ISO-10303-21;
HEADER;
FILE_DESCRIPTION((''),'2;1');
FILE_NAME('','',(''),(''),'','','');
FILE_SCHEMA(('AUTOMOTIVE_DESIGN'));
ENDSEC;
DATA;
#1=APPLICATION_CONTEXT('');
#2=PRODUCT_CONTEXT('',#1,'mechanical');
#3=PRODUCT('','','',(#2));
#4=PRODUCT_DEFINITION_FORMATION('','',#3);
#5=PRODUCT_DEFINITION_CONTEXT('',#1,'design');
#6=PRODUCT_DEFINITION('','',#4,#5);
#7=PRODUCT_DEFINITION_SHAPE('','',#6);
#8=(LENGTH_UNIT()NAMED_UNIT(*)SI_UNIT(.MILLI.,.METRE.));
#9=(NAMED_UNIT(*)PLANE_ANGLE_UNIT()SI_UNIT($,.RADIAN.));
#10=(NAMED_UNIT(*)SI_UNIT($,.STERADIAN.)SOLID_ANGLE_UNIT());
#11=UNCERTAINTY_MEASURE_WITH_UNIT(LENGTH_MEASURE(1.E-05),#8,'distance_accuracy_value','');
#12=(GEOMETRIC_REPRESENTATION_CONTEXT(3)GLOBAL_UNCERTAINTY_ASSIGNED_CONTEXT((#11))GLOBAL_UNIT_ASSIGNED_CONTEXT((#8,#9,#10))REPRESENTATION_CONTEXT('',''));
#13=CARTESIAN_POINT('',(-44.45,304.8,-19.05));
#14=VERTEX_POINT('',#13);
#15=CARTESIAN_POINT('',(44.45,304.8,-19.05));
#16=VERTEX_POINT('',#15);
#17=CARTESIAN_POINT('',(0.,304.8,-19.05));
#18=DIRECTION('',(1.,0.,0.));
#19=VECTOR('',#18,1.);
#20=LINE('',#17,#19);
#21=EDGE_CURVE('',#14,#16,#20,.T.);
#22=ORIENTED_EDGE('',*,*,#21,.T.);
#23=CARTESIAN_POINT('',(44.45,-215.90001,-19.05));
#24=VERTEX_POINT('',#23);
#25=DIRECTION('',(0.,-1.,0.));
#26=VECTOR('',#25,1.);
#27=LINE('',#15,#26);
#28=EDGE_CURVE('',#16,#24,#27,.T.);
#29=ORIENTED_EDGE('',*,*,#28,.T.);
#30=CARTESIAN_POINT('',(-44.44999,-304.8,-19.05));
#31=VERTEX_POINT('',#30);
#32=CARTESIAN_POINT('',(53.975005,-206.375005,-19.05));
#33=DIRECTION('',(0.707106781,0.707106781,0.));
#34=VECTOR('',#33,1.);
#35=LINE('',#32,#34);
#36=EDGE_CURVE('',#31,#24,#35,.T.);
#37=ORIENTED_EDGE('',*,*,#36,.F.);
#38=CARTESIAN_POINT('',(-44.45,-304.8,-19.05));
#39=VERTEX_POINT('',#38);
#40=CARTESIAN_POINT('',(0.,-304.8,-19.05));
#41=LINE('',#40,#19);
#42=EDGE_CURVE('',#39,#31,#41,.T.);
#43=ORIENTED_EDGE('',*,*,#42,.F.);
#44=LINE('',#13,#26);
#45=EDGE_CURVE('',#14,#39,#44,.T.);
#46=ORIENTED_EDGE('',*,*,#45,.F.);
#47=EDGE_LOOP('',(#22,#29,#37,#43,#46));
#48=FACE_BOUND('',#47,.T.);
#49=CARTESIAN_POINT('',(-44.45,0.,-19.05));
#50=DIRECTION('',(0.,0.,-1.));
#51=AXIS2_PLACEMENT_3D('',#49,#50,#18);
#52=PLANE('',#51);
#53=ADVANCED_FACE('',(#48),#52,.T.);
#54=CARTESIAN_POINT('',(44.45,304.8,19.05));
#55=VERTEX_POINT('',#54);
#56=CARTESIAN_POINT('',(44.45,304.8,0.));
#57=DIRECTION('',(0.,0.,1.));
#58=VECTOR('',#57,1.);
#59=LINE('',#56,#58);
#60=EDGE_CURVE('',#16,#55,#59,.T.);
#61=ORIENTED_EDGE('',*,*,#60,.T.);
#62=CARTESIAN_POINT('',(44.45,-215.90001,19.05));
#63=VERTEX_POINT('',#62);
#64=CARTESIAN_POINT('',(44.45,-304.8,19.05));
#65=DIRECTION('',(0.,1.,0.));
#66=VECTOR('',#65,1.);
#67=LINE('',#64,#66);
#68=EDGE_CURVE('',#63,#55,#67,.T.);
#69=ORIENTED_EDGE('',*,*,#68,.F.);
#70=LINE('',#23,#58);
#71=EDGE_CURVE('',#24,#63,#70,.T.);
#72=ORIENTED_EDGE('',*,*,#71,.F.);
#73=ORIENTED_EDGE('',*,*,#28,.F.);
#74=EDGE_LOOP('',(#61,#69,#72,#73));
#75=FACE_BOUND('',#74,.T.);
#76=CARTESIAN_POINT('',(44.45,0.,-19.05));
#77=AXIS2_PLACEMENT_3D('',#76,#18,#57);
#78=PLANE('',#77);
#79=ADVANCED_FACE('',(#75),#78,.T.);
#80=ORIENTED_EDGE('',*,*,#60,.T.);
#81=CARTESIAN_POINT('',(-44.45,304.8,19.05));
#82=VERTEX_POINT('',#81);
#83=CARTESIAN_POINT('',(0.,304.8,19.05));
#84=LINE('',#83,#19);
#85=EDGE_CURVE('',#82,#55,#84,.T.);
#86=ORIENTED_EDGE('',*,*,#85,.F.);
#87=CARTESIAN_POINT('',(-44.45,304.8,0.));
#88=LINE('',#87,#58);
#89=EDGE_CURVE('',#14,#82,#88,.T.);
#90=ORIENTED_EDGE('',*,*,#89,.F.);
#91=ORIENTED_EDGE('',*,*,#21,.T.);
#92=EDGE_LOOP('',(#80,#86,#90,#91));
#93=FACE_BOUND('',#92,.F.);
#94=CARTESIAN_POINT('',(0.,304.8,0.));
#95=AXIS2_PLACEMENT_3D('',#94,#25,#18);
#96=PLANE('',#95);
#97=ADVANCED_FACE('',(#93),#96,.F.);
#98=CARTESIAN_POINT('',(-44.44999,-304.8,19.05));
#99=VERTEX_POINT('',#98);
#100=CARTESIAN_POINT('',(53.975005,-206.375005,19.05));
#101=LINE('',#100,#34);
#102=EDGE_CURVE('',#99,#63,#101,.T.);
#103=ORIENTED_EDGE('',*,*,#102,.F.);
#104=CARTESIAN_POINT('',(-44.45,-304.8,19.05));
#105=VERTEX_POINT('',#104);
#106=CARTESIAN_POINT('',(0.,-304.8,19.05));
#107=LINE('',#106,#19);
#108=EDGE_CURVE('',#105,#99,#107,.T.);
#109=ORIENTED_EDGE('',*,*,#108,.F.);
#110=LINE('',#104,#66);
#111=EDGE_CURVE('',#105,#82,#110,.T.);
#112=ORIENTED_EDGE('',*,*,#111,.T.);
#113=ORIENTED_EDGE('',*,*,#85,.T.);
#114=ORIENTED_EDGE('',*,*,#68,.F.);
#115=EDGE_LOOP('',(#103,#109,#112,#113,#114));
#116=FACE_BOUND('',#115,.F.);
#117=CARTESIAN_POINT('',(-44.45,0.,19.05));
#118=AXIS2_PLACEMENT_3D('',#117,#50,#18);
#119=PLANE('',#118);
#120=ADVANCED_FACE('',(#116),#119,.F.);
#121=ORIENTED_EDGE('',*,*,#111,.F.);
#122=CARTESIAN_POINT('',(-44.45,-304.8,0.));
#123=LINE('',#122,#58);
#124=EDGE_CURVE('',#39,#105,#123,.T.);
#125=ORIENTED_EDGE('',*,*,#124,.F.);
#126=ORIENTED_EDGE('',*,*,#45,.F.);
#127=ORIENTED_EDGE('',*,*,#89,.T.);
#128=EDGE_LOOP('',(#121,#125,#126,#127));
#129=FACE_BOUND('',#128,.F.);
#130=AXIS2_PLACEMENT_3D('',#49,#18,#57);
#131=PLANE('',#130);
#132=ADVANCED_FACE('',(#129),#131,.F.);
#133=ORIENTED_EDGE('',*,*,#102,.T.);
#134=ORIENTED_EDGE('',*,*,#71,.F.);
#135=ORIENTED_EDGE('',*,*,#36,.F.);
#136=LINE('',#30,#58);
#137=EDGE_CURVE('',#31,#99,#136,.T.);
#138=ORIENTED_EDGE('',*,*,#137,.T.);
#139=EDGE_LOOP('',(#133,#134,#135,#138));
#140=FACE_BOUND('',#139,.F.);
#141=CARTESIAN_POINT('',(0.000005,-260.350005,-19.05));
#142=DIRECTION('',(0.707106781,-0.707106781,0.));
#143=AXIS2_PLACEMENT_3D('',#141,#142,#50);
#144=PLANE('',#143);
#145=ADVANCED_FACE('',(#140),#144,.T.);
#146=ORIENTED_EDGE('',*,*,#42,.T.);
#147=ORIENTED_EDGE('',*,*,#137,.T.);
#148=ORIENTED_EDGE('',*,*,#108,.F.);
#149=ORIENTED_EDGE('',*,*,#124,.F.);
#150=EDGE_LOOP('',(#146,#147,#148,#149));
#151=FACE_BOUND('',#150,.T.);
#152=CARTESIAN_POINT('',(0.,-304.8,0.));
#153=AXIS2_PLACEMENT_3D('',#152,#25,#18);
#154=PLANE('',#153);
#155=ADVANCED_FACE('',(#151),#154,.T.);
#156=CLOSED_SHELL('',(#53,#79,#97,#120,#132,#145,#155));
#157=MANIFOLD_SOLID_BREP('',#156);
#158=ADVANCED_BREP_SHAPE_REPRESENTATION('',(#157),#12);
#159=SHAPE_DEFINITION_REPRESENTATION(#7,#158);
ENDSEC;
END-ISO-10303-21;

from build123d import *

# Parameters (mm, degrees)
F0_W     = 88.9
F0_H     = 38.1
F1_DEPTH = 304.8
F2_SIZE2 = 88.89999
F2_SIZE  = 88.89999


# Not quite as in the source:
# - a fillet or chamfer is up to 0.001 mm smaller than in the source, because OpenCascade refuses the exact size


with BuildPart() as f1:
    # F0 (on Front) → F1 (new body, symmetric)
    with BuildSketch(Plane.XZ):
        Rectangle(F0_W, F0_H)
    extrude(amount=F1_DEPTH, both=True)

    # F2 (size 88.9 and 88.9 in the source; OpenCascade refuses exactly that, so slightly less here)
    f2_edges = [f1.edges().sort_by_distance(p)[0] for p in [
        (44.45, -304.8, 0),
    ]]
    chamfer(f2_edges, length=F2_SIZE, length2=F2_SIZE2)


solid = f1.part
